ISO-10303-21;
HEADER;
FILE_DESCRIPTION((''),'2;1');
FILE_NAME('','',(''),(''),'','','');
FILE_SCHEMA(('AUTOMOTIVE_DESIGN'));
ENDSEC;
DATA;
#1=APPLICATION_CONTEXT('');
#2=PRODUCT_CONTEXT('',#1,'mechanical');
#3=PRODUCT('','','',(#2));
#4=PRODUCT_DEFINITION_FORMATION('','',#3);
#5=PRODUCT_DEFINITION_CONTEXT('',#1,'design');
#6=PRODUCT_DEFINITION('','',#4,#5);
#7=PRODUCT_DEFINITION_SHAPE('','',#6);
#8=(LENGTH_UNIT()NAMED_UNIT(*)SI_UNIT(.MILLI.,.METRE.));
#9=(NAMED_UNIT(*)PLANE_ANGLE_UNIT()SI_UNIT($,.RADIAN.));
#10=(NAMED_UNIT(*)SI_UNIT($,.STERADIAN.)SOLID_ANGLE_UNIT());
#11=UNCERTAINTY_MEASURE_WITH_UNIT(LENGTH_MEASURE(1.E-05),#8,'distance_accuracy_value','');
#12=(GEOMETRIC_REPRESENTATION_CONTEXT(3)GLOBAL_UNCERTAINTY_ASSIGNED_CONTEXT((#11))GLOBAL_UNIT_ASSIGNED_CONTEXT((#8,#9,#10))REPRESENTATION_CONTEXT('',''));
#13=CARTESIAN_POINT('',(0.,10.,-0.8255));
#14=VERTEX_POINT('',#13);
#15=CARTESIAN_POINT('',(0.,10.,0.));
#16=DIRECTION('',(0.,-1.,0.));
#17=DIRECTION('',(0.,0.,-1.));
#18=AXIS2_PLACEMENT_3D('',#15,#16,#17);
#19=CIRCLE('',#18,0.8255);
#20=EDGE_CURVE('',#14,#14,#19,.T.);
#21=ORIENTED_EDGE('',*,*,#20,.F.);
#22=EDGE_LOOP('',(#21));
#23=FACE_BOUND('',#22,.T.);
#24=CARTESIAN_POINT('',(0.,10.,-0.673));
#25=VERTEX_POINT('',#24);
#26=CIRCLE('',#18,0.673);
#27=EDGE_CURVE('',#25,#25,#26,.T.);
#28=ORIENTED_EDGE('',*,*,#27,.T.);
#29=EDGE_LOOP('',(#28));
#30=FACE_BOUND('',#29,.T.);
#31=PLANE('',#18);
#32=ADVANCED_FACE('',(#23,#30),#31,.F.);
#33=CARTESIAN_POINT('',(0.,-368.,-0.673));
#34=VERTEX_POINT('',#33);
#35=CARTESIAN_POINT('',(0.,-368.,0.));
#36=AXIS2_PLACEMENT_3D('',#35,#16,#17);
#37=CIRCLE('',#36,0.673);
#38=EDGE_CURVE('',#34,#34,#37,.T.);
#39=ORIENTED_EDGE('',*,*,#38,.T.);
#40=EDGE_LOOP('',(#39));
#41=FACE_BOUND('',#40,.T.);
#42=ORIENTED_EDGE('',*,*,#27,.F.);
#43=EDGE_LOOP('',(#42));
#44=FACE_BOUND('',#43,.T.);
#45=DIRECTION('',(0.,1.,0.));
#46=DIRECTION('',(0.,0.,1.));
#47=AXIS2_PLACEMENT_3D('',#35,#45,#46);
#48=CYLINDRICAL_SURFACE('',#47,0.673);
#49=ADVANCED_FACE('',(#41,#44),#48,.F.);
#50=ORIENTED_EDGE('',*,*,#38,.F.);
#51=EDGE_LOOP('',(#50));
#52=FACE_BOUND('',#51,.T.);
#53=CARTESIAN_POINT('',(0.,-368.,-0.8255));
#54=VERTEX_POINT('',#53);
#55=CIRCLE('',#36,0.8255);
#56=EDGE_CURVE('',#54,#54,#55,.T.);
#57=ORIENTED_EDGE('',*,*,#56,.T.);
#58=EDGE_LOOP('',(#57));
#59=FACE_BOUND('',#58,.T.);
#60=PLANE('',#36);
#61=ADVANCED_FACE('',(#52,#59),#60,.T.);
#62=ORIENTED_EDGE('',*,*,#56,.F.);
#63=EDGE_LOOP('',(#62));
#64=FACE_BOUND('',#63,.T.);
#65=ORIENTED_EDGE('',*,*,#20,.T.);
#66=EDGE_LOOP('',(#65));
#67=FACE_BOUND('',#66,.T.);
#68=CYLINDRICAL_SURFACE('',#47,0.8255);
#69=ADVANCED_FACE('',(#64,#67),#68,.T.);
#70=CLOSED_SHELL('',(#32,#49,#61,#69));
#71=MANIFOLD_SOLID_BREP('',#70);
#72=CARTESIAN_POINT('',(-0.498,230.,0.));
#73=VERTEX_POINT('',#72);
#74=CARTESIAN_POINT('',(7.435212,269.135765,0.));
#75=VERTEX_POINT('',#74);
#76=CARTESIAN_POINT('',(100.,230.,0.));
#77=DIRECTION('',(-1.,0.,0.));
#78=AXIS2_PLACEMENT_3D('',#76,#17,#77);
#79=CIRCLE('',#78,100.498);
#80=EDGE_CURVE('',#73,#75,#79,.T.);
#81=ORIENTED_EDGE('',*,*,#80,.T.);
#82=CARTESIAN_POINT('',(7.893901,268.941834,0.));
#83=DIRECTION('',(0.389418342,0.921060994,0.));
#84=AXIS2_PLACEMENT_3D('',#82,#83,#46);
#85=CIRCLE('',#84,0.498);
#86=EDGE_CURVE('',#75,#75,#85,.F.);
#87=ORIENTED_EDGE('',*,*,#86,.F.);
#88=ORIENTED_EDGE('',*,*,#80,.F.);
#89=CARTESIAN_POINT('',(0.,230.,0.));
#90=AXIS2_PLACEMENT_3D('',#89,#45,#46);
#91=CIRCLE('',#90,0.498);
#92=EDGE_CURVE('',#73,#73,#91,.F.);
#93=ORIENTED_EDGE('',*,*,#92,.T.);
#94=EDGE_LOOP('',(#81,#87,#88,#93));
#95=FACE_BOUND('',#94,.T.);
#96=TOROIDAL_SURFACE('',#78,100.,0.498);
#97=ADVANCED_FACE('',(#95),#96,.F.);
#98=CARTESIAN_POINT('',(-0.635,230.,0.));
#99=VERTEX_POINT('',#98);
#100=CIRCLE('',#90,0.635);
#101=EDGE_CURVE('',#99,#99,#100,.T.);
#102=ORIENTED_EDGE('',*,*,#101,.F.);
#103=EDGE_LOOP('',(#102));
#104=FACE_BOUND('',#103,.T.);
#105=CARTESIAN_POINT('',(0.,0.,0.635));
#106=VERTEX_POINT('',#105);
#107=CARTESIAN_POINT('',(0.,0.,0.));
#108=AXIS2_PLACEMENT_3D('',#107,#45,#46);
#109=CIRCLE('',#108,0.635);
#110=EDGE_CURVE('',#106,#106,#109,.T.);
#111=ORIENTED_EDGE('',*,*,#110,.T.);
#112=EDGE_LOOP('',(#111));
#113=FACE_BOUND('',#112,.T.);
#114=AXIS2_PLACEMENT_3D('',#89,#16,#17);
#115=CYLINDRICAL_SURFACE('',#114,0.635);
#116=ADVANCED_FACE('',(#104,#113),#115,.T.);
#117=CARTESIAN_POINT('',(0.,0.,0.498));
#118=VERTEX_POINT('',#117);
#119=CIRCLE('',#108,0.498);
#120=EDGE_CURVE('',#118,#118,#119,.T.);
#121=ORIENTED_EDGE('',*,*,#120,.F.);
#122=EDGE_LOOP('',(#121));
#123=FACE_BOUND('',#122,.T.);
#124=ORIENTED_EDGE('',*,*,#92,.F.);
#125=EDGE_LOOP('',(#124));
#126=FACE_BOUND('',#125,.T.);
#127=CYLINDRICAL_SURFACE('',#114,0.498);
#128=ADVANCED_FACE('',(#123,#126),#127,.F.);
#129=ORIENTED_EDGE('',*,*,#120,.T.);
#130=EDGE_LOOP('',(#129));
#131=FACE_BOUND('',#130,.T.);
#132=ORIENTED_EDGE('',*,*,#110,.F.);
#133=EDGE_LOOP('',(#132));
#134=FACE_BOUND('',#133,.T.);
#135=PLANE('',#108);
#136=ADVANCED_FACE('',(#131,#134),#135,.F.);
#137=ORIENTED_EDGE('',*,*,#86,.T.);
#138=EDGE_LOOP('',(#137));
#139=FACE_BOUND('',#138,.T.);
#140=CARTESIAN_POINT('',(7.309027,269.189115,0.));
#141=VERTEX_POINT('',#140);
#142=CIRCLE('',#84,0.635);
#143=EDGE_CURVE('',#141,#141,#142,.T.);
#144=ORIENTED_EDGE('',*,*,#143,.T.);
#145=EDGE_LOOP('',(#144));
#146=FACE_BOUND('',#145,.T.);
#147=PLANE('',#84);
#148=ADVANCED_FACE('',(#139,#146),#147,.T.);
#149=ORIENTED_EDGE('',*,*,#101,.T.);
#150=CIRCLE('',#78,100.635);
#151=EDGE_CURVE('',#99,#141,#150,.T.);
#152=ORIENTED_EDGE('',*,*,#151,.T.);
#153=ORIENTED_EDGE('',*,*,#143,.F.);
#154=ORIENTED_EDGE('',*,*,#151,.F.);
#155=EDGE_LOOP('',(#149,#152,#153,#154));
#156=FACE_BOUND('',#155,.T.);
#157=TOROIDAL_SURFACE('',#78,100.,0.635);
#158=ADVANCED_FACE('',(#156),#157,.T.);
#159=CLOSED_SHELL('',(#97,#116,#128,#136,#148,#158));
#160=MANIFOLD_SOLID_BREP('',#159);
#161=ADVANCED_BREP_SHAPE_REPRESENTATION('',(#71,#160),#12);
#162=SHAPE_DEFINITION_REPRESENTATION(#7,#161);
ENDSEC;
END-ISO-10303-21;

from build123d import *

# Parameters (mm, degrees)
SKETCH1_R           = 0.635
SKETCH1_R_2         = 0.498
BOSS_EXTRUDE1_DEPTH = 230
SWEEP2_OUTLINE_R    = 0.635
SWEEP2_OUTLINE_R_2  = 0.498
SWEEP2_ANGLE        = 22.918312
SKETCH4_R           = 0.8255
SKETCH4_R_2         = 0.673
BOSS_EXTRUDE2_DEPTH = 378


# Read off the part's stored shape, not the designer's step: Sweep2
with BuildPart() as part:
    # Sketch1 → Boss-Extrude1 (new body)
    with BuildSketch(Plane(origin=(0, 0, 0), x_dir=(1, 0, 0), z_dir=(0, 1, 0))):
        with Locations(Location((0, 0, 0), (0, 0, 270))):
            Circle(SKETCH1_R)
        with Locations(Location((0, 0, 0), (0, 0, 270))):
            Circle(SKETCH1_R_2, mode=Mode.SUBTRACT)
    extrude(amount=BOSS_EXTRUDE1_DEPTH)

    # Sweep2 outline → Sweep2 (revolve)
    with BuildSketch(Plane(origin=(100, 230, 0), x_dir=(-0.9210609940028842, 0.3894183423086526, 0), z_dir=(0.3894183423086526, 0.9210609940028842, 0))):
        with Locations((100, 0)):
            Circle(SWEEP2_OUTLINE_R)
        with Locations((100, 0)):
            Circle(SWEEP2_OUTLINE_R_2, mode=Mode.SUBTRACT)
    revolve(axis=Axis((100, 230, 0), (0, 0, 1)), revolution_arc=SWEEP2_ANGLE)


with BuildPart() as body_2:
    # Sketch4 → Boss-Extrude2 (new body)
    with BuildSketch(Plane(origin=(0, 10, 0), x_dir=(-1, 0, 0), z_dir=(0, -1, 0))):
        with Locations(Location((0, 0, 0), (0, 0, 90))):
            Circle(SKETCH4_R)
        with Locations(Location((0, 0, 0), (0, 0, 90))):
            Circle(SKETCH4_R_2, mode=Mode.SUBTRACT)
    extrude(amount=BOSS_EXTRUDE2_DEPTH)


solid = Compound([part.part, body_2.part])
